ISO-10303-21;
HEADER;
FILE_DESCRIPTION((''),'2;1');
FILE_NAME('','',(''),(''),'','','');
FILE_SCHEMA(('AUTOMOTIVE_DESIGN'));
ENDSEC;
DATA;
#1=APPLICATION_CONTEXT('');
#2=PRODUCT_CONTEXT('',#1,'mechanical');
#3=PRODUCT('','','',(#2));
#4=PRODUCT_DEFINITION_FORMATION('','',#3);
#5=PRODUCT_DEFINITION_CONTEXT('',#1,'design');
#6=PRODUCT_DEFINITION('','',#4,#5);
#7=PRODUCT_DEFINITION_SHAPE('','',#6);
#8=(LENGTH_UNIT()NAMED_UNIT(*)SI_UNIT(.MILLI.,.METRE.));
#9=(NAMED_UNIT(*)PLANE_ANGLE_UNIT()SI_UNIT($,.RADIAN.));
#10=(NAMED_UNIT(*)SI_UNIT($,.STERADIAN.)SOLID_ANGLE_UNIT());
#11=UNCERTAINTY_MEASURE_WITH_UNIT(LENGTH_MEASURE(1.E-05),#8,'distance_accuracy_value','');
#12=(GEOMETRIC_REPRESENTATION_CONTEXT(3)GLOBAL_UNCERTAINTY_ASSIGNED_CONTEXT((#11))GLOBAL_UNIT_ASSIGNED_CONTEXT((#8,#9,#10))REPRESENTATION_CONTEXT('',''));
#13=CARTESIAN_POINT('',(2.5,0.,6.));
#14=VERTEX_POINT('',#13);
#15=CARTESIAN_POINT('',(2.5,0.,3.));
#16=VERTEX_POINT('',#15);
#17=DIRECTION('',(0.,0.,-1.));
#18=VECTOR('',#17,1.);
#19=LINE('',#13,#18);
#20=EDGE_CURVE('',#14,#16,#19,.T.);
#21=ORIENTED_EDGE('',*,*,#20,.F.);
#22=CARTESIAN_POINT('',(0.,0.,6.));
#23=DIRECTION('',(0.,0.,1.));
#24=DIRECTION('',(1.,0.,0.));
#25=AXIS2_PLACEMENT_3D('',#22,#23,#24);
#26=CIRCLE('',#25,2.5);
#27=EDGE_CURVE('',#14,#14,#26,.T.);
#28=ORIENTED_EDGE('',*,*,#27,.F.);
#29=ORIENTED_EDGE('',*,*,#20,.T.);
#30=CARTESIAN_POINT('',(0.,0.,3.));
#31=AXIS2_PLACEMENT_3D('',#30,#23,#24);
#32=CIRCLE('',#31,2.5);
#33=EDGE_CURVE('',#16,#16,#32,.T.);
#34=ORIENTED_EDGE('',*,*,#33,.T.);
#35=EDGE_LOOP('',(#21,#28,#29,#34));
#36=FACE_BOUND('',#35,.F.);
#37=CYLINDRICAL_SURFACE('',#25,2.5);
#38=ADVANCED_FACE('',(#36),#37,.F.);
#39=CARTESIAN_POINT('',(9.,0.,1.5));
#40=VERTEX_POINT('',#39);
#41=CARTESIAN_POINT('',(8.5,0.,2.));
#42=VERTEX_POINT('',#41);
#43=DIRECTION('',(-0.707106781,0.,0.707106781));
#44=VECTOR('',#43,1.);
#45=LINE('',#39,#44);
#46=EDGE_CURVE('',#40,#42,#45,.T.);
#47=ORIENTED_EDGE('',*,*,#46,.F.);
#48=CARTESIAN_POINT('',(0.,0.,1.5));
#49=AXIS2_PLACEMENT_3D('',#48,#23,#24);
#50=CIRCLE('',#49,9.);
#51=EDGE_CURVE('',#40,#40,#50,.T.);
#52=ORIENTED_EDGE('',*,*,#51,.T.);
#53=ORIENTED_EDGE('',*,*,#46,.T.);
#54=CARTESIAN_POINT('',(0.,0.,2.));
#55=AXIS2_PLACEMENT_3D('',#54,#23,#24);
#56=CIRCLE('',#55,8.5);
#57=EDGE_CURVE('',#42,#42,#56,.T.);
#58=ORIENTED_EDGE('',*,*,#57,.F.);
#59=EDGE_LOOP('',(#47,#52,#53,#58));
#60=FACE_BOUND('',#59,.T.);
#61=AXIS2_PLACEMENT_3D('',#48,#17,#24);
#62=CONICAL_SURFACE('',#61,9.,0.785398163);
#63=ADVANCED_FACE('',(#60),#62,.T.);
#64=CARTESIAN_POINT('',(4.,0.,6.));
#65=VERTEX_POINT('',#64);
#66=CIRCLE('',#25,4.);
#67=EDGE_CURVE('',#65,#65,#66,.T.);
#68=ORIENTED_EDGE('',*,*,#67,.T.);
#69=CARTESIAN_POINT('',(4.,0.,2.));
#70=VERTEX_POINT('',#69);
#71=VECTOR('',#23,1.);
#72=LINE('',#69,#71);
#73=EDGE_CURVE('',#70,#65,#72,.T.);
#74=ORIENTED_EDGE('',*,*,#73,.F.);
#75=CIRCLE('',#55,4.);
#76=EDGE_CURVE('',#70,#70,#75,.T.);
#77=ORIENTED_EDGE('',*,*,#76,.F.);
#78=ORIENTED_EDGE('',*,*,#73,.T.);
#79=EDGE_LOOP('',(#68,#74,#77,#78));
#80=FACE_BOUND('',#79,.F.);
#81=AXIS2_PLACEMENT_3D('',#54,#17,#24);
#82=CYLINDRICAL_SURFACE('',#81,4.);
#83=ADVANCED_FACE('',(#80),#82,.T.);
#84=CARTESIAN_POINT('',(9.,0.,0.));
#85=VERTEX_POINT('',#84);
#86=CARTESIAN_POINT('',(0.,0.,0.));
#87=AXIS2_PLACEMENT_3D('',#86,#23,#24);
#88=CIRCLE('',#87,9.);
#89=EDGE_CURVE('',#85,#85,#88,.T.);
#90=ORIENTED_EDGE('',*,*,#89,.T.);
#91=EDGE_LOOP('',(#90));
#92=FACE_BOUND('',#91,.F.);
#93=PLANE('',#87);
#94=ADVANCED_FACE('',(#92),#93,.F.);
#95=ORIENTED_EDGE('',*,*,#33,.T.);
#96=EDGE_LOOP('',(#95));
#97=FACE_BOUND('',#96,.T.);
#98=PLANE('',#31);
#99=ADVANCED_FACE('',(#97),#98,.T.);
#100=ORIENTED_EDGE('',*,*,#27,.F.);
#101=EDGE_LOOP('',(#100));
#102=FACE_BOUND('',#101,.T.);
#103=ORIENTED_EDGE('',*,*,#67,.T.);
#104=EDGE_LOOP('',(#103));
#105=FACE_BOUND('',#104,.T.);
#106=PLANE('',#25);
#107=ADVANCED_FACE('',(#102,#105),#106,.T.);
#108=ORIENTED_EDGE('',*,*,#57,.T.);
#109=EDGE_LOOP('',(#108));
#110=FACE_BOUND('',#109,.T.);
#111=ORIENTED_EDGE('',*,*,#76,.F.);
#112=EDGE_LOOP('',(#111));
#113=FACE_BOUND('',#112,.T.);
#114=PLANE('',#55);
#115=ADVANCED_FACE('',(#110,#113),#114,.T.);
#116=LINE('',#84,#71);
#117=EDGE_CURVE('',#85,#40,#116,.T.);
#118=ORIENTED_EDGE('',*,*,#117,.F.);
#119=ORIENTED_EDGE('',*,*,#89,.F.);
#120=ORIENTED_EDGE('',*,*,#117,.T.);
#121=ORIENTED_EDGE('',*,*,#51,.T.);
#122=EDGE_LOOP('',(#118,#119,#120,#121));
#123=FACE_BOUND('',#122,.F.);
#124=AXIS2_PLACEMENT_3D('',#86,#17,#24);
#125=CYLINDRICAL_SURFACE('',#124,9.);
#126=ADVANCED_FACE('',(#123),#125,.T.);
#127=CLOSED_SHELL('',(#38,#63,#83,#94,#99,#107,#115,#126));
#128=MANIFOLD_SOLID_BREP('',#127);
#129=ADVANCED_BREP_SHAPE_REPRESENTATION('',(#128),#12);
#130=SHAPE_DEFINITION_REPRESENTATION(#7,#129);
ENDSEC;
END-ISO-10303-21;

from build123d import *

# Parameters (mm, degrees)
F0_R     = 9
F1_DEPTH = 2
F2_R     = 4
F3_DEPTH = 4
F4_R     = 2.5
F5_DEPTH = 3
F6_SIZE  = 0.5


with BuildPart() as f1:
    # F0 (on Top) → F1 (new body)
    with BuildSketch(Plane.XY):
        Circle(F0_R)
    extrude(amount=F1_DEPTH)

    # F2 (on face) → F3 (join)
    with BuildSketch(Plane.XY.offset(2)):
        Circle(F2_R)
    extrude(amount=F3_DEPTH)

    # F4 (on face) → F5 (cut)
    with BuildSketch(Plane.XY.offset(6)):
        Circle(F4_R)
    extrude(amount=-F5_DEPTH, mode=Mode.SUBTRACT)

    # F6
    f6_edges = [f1.edges().sort_by_distance(p)[0] for p in [
        (-9, 0, 2),
    ]]
    chamfer(f6_edges, length=F6_SIZE)


solid = f1.part
